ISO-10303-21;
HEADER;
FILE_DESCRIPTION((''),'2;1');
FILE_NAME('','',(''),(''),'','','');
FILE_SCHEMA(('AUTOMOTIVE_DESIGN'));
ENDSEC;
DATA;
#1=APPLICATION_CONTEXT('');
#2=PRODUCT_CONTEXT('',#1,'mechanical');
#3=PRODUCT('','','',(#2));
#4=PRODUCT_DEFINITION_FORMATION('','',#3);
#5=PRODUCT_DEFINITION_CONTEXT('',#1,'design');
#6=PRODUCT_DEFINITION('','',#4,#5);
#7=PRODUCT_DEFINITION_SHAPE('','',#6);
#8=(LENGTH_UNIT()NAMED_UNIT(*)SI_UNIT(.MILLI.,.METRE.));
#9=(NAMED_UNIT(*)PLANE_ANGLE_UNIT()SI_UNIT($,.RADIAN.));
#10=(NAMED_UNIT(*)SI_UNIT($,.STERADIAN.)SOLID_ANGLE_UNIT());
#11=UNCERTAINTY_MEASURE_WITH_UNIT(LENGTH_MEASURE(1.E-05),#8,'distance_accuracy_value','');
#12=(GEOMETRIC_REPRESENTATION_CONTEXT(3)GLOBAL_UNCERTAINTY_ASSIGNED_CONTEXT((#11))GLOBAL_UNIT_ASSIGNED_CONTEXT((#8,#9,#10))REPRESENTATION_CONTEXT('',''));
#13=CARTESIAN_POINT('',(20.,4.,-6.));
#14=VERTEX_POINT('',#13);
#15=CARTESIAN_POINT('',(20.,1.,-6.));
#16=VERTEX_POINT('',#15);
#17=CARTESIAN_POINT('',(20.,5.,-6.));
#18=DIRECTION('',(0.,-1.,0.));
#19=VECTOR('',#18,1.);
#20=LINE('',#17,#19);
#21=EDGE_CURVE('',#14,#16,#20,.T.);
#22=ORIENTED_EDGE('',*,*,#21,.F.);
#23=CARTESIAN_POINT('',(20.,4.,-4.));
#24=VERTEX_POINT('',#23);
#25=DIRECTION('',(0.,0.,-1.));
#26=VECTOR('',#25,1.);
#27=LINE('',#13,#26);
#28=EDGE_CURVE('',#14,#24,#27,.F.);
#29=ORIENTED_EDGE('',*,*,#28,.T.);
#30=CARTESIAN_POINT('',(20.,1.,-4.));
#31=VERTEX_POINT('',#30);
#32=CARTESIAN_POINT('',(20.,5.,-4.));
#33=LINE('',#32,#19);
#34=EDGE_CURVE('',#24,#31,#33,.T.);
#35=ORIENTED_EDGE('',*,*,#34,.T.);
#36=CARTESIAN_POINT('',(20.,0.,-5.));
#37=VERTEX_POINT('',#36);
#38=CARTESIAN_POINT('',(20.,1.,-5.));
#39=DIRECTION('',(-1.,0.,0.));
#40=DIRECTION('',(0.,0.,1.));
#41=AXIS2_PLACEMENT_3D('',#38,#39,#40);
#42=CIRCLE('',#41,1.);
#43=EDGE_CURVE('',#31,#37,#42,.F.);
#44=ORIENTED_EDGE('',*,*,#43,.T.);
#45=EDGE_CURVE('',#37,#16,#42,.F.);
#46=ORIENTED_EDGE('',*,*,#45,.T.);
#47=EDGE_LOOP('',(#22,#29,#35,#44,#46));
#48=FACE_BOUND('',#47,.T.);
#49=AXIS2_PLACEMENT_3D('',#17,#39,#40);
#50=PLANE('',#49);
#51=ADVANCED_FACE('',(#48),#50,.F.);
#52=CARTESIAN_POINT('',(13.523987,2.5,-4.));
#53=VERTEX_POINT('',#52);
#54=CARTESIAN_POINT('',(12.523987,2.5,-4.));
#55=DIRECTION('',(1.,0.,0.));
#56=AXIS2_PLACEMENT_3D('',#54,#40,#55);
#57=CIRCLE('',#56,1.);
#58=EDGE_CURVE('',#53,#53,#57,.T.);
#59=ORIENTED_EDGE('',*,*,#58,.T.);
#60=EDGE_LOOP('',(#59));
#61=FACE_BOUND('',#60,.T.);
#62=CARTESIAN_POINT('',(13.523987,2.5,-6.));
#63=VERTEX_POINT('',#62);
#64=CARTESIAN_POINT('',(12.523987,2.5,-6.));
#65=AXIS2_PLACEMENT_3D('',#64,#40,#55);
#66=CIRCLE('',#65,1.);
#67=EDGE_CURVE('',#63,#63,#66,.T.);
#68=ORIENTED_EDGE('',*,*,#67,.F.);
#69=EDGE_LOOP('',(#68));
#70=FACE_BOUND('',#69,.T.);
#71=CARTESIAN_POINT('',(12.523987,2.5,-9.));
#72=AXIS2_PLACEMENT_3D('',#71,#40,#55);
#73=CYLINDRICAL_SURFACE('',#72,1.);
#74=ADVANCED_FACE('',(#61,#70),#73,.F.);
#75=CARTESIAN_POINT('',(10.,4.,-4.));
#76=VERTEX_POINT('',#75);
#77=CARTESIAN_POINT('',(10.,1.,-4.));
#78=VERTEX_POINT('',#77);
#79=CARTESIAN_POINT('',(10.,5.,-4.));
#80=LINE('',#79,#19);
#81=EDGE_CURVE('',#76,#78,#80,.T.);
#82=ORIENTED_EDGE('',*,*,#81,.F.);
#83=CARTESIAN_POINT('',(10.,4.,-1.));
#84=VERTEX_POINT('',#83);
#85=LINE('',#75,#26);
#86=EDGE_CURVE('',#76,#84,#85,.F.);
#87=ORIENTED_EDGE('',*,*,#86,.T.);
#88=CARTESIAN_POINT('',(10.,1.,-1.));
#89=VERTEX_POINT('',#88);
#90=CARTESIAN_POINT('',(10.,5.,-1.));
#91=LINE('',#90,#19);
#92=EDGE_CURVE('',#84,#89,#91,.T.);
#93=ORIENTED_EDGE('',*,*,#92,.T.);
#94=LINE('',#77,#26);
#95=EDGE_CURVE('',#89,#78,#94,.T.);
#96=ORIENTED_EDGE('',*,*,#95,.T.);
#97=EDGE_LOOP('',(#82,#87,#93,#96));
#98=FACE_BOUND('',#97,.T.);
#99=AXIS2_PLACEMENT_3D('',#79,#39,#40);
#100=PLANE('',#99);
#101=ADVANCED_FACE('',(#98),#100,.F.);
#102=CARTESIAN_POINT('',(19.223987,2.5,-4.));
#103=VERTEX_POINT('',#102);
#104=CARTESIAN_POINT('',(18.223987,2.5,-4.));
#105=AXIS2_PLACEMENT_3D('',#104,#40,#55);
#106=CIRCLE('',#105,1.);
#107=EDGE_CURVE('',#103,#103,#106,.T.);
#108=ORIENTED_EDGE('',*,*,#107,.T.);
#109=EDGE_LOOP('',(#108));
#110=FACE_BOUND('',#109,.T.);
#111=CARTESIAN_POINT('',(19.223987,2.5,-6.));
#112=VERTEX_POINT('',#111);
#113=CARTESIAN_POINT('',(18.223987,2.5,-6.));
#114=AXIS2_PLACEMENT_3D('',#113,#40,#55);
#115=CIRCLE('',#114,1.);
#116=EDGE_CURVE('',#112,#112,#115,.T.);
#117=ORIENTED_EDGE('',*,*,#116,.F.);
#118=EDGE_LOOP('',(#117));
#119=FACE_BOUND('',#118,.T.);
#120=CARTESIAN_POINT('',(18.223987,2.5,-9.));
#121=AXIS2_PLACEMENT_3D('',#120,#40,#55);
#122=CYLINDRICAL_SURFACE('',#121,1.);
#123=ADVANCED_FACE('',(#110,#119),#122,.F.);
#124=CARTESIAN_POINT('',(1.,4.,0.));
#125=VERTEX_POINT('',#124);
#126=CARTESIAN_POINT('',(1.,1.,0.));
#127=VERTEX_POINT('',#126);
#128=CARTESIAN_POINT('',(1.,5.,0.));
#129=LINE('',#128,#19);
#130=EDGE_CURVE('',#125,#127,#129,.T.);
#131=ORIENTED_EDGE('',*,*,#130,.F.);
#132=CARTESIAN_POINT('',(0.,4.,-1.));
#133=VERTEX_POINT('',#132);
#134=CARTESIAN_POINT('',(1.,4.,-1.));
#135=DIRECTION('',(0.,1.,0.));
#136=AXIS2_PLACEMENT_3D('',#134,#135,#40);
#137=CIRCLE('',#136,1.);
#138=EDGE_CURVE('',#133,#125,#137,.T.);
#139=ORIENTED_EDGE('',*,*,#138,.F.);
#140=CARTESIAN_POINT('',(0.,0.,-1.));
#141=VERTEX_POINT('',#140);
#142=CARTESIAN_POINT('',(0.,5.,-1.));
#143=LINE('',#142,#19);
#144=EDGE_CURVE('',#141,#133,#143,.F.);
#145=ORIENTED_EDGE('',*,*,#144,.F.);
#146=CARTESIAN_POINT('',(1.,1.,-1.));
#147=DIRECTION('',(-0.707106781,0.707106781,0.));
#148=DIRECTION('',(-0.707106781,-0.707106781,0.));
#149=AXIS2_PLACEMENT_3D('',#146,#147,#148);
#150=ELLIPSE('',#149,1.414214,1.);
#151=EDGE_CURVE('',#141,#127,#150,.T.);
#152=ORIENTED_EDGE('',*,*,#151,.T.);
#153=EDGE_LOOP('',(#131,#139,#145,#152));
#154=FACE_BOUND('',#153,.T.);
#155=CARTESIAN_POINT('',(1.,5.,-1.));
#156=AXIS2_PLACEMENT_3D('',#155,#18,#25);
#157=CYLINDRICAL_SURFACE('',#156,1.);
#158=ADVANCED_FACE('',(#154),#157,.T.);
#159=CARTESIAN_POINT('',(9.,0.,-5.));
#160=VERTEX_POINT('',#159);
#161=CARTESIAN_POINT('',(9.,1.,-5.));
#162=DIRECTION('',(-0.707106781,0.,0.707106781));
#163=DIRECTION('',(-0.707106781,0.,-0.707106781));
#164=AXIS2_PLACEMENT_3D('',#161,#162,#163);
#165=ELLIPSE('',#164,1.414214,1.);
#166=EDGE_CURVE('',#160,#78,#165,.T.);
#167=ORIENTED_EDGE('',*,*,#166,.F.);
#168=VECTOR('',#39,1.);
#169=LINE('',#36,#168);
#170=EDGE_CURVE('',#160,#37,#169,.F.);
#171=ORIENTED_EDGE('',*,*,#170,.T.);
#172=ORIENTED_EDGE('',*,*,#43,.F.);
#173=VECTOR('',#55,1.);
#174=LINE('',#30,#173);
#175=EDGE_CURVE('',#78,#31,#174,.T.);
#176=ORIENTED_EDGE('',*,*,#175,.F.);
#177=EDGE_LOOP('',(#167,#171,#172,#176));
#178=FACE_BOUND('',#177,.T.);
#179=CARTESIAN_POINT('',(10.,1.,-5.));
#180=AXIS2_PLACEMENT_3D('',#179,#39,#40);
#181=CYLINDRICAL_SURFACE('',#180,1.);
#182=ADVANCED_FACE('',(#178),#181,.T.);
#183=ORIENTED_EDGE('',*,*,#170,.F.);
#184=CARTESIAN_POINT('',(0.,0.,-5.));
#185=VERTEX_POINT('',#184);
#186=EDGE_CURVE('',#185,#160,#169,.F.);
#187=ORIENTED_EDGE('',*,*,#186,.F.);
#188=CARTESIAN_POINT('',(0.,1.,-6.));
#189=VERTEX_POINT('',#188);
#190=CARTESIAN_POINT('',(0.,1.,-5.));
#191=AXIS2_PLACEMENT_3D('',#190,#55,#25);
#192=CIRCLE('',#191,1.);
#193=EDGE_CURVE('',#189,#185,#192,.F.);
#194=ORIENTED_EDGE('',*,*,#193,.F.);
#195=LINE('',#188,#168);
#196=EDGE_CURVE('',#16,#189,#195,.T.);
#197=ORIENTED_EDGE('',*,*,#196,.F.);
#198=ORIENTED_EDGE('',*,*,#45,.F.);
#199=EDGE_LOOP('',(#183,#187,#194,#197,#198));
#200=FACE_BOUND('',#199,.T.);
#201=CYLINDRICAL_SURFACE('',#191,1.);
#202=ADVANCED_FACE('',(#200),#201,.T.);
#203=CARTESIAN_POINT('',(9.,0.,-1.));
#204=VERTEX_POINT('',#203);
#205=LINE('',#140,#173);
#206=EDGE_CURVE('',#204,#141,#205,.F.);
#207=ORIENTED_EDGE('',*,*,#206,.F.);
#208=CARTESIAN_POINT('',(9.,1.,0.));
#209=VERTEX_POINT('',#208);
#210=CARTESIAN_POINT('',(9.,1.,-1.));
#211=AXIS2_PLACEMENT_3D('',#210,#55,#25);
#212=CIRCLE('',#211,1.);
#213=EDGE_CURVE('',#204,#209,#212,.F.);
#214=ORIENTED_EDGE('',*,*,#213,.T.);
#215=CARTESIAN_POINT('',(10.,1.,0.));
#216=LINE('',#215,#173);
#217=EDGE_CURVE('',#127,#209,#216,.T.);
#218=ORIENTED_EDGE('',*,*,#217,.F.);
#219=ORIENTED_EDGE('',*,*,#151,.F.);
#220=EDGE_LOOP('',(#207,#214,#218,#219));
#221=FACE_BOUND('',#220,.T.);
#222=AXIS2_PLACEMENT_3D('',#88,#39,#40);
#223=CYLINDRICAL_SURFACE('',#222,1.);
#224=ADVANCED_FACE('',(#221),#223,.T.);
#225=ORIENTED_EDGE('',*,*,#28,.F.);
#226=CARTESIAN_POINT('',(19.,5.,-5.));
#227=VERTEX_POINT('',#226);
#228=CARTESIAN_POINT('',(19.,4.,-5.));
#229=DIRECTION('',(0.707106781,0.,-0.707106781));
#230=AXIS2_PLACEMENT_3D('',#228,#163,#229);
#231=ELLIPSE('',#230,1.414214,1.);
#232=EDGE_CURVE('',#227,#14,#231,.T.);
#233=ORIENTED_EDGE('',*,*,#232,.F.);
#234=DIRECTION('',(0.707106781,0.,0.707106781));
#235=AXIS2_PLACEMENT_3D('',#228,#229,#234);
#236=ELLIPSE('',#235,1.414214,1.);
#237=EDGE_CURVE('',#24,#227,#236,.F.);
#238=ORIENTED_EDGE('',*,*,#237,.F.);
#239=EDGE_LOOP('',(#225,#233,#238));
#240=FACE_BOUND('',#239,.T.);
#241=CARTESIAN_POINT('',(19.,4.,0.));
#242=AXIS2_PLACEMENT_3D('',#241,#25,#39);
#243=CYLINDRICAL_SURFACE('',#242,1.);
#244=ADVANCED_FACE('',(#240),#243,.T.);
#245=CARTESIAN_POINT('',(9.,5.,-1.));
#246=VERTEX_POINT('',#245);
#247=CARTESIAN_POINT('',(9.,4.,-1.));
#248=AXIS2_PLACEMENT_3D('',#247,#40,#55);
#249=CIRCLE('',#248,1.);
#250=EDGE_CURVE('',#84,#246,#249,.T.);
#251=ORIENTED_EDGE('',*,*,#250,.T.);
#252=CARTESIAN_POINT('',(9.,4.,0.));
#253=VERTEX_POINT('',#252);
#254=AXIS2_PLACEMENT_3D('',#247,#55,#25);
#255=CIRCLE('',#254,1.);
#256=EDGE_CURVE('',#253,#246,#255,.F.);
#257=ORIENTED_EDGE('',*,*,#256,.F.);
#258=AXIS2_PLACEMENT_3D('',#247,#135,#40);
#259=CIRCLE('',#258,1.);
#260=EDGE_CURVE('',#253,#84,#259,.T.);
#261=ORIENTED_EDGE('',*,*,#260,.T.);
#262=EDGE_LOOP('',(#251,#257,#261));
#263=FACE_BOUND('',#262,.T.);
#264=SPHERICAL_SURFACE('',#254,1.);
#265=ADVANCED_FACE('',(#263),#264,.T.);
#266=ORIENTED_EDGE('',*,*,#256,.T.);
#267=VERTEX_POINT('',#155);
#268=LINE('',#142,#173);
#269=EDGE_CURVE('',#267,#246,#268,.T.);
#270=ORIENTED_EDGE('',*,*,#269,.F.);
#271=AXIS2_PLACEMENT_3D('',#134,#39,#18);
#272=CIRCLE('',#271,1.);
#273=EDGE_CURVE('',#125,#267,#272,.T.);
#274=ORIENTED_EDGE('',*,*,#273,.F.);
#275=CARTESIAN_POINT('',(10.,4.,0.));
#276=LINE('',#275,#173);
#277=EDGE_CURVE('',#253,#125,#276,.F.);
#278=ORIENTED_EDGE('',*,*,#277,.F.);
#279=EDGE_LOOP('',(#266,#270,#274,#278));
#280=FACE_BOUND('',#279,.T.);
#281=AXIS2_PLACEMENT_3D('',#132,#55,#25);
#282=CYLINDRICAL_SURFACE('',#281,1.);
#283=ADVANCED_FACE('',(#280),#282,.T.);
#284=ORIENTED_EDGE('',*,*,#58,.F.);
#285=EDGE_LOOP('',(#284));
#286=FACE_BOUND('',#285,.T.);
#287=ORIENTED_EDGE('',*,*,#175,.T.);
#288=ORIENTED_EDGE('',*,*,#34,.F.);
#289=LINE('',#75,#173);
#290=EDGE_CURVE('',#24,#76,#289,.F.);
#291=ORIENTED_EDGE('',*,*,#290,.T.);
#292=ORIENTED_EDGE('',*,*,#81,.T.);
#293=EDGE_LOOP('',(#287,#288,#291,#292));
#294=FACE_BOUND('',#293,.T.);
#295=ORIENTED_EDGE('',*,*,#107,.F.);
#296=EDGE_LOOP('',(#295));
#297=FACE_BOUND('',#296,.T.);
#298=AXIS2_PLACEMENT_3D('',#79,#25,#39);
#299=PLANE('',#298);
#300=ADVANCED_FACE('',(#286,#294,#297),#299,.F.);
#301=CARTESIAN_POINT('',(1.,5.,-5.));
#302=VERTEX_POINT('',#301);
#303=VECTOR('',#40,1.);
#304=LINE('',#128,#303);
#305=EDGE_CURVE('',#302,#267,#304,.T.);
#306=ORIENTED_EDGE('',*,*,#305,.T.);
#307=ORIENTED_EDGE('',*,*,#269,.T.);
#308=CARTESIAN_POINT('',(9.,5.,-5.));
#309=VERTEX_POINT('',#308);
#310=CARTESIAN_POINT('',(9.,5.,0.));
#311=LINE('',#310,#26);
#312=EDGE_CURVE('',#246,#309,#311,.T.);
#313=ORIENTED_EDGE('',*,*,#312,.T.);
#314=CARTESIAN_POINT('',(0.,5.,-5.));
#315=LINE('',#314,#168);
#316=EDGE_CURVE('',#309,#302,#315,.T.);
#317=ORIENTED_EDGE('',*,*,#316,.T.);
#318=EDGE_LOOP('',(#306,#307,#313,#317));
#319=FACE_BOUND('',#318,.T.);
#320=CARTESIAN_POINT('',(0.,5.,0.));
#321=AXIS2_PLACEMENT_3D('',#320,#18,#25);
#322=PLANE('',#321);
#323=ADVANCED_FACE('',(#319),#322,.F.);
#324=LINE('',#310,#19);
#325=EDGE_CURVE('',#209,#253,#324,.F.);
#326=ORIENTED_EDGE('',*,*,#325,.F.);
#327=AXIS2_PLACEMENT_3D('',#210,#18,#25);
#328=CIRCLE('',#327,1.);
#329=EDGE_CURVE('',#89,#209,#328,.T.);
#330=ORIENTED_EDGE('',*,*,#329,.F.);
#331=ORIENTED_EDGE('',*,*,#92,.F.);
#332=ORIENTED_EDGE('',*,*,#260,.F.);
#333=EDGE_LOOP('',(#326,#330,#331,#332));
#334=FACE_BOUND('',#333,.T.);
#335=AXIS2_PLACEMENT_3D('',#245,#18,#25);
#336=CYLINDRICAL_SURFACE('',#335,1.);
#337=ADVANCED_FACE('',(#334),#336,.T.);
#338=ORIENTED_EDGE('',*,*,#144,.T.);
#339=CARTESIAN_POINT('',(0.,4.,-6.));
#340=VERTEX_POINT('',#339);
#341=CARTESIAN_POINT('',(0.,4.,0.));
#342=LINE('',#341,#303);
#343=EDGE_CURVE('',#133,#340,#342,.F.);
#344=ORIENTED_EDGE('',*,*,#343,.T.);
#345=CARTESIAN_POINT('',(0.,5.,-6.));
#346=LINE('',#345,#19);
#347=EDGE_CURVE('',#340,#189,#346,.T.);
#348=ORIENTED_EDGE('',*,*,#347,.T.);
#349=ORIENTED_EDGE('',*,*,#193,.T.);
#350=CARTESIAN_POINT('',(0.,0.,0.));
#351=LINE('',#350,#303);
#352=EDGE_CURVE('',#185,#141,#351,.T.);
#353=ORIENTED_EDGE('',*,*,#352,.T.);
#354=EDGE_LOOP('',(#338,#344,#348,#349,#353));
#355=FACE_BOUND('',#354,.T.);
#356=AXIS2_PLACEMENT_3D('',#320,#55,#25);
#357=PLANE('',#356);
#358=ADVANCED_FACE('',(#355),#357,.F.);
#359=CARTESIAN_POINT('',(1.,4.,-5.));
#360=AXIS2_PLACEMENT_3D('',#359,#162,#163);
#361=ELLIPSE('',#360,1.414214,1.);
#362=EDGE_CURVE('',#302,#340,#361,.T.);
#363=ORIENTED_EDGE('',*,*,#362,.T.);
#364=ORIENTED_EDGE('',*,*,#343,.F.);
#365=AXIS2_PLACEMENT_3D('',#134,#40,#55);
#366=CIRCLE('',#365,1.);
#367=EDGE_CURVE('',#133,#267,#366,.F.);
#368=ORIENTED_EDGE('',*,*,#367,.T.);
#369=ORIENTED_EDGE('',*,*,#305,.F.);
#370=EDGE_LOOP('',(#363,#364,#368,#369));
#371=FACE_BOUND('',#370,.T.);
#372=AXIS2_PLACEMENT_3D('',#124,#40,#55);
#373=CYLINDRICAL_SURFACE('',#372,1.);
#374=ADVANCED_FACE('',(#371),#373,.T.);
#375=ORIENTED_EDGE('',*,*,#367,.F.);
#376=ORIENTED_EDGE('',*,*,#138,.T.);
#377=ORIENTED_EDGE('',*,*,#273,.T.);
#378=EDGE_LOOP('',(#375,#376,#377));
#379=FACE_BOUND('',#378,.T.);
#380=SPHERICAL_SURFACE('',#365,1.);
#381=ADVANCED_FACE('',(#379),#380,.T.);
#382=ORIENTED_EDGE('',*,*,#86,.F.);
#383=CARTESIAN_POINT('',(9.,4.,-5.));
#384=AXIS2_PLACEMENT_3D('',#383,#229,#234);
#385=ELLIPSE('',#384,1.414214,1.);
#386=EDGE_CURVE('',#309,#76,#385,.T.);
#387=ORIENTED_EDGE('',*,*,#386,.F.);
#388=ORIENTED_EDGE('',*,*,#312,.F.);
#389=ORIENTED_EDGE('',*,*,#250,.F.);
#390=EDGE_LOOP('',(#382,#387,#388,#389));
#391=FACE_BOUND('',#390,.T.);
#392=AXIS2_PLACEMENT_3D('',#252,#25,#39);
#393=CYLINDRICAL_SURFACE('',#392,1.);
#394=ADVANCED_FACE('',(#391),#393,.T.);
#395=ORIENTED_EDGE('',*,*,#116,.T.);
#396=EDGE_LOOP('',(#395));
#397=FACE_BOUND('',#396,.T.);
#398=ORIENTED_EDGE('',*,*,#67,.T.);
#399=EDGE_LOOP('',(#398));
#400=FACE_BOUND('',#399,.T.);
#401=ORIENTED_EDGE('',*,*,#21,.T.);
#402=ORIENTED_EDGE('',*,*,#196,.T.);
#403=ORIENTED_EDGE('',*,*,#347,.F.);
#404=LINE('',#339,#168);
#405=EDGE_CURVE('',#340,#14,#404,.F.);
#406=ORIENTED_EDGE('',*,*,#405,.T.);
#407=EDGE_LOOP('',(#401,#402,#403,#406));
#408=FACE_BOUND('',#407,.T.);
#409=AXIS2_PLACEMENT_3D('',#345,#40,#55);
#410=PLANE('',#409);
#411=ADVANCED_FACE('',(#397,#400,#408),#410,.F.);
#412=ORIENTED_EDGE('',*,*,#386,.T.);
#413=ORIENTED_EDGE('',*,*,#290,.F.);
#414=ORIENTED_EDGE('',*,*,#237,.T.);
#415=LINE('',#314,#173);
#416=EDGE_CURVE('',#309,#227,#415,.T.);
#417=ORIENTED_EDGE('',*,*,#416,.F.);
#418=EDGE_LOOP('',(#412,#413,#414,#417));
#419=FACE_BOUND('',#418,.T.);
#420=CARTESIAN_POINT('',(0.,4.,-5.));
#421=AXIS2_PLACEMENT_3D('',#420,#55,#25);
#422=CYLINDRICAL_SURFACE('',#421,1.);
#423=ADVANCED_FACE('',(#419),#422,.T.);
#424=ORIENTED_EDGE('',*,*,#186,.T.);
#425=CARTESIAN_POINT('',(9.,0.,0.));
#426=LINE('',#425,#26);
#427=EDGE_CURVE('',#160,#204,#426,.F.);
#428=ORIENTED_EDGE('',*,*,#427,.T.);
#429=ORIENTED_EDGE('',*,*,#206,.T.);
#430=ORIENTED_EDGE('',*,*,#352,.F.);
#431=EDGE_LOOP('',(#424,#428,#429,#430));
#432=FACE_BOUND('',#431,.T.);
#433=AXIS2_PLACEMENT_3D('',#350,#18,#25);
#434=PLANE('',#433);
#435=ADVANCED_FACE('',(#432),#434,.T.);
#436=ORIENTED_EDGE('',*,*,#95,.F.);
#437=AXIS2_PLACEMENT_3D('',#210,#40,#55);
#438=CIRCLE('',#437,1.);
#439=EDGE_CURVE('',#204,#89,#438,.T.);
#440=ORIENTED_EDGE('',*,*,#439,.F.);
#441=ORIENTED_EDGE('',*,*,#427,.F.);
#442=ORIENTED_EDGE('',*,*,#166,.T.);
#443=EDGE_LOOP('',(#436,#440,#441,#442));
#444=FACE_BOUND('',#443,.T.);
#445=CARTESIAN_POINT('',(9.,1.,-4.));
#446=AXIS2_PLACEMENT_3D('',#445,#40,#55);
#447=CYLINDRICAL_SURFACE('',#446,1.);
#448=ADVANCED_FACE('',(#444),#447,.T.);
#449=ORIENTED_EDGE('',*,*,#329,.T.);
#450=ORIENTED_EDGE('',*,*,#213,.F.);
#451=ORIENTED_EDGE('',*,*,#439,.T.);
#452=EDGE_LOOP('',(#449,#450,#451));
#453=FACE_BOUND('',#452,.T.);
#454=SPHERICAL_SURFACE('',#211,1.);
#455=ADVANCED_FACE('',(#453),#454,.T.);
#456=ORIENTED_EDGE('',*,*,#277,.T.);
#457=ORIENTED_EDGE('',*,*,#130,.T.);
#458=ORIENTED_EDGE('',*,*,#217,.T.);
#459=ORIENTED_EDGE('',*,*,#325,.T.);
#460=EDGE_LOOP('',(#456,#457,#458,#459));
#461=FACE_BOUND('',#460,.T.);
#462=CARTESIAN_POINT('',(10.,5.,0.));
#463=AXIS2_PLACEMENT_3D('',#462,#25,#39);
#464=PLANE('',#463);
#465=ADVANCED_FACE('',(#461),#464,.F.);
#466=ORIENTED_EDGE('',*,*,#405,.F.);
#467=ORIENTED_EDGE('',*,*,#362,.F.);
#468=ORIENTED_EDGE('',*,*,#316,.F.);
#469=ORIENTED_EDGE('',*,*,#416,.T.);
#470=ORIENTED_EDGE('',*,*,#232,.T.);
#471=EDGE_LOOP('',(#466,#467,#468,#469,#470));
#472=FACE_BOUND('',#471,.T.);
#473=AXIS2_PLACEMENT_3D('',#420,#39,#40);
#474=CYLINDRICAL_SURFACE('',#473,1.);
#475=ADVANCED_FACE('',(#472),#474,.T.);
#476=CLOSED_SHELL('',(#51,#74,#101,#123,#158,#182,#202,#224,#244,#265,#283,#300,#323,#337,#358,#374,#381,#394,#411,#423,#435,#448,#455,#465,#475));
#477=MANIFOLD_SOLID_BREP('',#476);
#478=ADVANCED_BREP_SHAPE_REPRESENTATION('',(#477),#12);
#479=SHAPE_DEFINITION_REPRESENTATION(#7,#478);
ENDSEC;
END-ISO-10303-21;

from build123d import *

# Parameters (mm, degrees)
BOSS_EXTRUDE1_DEPTH = 5
SKETCH2_R           = 1
CUT_EXTRUDE1_DEPTH  = 5
FILLET1_R           = 1


with BuildPart() as part:
    # Sketch1 → Boss-Extrude1 (new body)
    with BuildSketch(Plane(origin=(0, 0, 0), x_dir=(1, 0, 0), z_dir=(0, 1, 0))):
        Polygon((0, 0), (0, 6), (16.608456475, 6), (20, 6), (20, 4), (10, 4), (10, 0), align=None)
    extrude(amount=BOSS_EXTRUDE1_DEPTH)

    # Sketch2 → Cut-Extrude1 (cut)
    with BuildSketch(Plane.XY.offset(-4)):
        with Locations((12.523987241, 2.5)):
            Circle(SKETCH2_R)
        with Locations((18.223987241, 2.5)):
            Circle(SKETCH2_R)
    extrude(amount=-CUT_EXTRUDE1_DEPTH, mode=Mode.SUBTRACT)

    # Fillet1
    fillet1_edges = [part.edges().sort_by_distance(p)[0] for p in [
        (5, 0, 0),
        (5, 5, 0),
        (0, 5, -3),
        (10, 5, -6),
        (20, 5, -5),
        (15, 5, -4),
        (10, 5, -2),
        (0, 2.5, 0),
        (10, 2.5, 0),
        (10, 0, -2),
        (10, 0, -6),
        (15, 0, -4),
    ]]
    fillet(fillet1_edges, radius=FILLET1_R - 0.0001)  # a hair under: the kernel refuses the full size


solid = part.part
